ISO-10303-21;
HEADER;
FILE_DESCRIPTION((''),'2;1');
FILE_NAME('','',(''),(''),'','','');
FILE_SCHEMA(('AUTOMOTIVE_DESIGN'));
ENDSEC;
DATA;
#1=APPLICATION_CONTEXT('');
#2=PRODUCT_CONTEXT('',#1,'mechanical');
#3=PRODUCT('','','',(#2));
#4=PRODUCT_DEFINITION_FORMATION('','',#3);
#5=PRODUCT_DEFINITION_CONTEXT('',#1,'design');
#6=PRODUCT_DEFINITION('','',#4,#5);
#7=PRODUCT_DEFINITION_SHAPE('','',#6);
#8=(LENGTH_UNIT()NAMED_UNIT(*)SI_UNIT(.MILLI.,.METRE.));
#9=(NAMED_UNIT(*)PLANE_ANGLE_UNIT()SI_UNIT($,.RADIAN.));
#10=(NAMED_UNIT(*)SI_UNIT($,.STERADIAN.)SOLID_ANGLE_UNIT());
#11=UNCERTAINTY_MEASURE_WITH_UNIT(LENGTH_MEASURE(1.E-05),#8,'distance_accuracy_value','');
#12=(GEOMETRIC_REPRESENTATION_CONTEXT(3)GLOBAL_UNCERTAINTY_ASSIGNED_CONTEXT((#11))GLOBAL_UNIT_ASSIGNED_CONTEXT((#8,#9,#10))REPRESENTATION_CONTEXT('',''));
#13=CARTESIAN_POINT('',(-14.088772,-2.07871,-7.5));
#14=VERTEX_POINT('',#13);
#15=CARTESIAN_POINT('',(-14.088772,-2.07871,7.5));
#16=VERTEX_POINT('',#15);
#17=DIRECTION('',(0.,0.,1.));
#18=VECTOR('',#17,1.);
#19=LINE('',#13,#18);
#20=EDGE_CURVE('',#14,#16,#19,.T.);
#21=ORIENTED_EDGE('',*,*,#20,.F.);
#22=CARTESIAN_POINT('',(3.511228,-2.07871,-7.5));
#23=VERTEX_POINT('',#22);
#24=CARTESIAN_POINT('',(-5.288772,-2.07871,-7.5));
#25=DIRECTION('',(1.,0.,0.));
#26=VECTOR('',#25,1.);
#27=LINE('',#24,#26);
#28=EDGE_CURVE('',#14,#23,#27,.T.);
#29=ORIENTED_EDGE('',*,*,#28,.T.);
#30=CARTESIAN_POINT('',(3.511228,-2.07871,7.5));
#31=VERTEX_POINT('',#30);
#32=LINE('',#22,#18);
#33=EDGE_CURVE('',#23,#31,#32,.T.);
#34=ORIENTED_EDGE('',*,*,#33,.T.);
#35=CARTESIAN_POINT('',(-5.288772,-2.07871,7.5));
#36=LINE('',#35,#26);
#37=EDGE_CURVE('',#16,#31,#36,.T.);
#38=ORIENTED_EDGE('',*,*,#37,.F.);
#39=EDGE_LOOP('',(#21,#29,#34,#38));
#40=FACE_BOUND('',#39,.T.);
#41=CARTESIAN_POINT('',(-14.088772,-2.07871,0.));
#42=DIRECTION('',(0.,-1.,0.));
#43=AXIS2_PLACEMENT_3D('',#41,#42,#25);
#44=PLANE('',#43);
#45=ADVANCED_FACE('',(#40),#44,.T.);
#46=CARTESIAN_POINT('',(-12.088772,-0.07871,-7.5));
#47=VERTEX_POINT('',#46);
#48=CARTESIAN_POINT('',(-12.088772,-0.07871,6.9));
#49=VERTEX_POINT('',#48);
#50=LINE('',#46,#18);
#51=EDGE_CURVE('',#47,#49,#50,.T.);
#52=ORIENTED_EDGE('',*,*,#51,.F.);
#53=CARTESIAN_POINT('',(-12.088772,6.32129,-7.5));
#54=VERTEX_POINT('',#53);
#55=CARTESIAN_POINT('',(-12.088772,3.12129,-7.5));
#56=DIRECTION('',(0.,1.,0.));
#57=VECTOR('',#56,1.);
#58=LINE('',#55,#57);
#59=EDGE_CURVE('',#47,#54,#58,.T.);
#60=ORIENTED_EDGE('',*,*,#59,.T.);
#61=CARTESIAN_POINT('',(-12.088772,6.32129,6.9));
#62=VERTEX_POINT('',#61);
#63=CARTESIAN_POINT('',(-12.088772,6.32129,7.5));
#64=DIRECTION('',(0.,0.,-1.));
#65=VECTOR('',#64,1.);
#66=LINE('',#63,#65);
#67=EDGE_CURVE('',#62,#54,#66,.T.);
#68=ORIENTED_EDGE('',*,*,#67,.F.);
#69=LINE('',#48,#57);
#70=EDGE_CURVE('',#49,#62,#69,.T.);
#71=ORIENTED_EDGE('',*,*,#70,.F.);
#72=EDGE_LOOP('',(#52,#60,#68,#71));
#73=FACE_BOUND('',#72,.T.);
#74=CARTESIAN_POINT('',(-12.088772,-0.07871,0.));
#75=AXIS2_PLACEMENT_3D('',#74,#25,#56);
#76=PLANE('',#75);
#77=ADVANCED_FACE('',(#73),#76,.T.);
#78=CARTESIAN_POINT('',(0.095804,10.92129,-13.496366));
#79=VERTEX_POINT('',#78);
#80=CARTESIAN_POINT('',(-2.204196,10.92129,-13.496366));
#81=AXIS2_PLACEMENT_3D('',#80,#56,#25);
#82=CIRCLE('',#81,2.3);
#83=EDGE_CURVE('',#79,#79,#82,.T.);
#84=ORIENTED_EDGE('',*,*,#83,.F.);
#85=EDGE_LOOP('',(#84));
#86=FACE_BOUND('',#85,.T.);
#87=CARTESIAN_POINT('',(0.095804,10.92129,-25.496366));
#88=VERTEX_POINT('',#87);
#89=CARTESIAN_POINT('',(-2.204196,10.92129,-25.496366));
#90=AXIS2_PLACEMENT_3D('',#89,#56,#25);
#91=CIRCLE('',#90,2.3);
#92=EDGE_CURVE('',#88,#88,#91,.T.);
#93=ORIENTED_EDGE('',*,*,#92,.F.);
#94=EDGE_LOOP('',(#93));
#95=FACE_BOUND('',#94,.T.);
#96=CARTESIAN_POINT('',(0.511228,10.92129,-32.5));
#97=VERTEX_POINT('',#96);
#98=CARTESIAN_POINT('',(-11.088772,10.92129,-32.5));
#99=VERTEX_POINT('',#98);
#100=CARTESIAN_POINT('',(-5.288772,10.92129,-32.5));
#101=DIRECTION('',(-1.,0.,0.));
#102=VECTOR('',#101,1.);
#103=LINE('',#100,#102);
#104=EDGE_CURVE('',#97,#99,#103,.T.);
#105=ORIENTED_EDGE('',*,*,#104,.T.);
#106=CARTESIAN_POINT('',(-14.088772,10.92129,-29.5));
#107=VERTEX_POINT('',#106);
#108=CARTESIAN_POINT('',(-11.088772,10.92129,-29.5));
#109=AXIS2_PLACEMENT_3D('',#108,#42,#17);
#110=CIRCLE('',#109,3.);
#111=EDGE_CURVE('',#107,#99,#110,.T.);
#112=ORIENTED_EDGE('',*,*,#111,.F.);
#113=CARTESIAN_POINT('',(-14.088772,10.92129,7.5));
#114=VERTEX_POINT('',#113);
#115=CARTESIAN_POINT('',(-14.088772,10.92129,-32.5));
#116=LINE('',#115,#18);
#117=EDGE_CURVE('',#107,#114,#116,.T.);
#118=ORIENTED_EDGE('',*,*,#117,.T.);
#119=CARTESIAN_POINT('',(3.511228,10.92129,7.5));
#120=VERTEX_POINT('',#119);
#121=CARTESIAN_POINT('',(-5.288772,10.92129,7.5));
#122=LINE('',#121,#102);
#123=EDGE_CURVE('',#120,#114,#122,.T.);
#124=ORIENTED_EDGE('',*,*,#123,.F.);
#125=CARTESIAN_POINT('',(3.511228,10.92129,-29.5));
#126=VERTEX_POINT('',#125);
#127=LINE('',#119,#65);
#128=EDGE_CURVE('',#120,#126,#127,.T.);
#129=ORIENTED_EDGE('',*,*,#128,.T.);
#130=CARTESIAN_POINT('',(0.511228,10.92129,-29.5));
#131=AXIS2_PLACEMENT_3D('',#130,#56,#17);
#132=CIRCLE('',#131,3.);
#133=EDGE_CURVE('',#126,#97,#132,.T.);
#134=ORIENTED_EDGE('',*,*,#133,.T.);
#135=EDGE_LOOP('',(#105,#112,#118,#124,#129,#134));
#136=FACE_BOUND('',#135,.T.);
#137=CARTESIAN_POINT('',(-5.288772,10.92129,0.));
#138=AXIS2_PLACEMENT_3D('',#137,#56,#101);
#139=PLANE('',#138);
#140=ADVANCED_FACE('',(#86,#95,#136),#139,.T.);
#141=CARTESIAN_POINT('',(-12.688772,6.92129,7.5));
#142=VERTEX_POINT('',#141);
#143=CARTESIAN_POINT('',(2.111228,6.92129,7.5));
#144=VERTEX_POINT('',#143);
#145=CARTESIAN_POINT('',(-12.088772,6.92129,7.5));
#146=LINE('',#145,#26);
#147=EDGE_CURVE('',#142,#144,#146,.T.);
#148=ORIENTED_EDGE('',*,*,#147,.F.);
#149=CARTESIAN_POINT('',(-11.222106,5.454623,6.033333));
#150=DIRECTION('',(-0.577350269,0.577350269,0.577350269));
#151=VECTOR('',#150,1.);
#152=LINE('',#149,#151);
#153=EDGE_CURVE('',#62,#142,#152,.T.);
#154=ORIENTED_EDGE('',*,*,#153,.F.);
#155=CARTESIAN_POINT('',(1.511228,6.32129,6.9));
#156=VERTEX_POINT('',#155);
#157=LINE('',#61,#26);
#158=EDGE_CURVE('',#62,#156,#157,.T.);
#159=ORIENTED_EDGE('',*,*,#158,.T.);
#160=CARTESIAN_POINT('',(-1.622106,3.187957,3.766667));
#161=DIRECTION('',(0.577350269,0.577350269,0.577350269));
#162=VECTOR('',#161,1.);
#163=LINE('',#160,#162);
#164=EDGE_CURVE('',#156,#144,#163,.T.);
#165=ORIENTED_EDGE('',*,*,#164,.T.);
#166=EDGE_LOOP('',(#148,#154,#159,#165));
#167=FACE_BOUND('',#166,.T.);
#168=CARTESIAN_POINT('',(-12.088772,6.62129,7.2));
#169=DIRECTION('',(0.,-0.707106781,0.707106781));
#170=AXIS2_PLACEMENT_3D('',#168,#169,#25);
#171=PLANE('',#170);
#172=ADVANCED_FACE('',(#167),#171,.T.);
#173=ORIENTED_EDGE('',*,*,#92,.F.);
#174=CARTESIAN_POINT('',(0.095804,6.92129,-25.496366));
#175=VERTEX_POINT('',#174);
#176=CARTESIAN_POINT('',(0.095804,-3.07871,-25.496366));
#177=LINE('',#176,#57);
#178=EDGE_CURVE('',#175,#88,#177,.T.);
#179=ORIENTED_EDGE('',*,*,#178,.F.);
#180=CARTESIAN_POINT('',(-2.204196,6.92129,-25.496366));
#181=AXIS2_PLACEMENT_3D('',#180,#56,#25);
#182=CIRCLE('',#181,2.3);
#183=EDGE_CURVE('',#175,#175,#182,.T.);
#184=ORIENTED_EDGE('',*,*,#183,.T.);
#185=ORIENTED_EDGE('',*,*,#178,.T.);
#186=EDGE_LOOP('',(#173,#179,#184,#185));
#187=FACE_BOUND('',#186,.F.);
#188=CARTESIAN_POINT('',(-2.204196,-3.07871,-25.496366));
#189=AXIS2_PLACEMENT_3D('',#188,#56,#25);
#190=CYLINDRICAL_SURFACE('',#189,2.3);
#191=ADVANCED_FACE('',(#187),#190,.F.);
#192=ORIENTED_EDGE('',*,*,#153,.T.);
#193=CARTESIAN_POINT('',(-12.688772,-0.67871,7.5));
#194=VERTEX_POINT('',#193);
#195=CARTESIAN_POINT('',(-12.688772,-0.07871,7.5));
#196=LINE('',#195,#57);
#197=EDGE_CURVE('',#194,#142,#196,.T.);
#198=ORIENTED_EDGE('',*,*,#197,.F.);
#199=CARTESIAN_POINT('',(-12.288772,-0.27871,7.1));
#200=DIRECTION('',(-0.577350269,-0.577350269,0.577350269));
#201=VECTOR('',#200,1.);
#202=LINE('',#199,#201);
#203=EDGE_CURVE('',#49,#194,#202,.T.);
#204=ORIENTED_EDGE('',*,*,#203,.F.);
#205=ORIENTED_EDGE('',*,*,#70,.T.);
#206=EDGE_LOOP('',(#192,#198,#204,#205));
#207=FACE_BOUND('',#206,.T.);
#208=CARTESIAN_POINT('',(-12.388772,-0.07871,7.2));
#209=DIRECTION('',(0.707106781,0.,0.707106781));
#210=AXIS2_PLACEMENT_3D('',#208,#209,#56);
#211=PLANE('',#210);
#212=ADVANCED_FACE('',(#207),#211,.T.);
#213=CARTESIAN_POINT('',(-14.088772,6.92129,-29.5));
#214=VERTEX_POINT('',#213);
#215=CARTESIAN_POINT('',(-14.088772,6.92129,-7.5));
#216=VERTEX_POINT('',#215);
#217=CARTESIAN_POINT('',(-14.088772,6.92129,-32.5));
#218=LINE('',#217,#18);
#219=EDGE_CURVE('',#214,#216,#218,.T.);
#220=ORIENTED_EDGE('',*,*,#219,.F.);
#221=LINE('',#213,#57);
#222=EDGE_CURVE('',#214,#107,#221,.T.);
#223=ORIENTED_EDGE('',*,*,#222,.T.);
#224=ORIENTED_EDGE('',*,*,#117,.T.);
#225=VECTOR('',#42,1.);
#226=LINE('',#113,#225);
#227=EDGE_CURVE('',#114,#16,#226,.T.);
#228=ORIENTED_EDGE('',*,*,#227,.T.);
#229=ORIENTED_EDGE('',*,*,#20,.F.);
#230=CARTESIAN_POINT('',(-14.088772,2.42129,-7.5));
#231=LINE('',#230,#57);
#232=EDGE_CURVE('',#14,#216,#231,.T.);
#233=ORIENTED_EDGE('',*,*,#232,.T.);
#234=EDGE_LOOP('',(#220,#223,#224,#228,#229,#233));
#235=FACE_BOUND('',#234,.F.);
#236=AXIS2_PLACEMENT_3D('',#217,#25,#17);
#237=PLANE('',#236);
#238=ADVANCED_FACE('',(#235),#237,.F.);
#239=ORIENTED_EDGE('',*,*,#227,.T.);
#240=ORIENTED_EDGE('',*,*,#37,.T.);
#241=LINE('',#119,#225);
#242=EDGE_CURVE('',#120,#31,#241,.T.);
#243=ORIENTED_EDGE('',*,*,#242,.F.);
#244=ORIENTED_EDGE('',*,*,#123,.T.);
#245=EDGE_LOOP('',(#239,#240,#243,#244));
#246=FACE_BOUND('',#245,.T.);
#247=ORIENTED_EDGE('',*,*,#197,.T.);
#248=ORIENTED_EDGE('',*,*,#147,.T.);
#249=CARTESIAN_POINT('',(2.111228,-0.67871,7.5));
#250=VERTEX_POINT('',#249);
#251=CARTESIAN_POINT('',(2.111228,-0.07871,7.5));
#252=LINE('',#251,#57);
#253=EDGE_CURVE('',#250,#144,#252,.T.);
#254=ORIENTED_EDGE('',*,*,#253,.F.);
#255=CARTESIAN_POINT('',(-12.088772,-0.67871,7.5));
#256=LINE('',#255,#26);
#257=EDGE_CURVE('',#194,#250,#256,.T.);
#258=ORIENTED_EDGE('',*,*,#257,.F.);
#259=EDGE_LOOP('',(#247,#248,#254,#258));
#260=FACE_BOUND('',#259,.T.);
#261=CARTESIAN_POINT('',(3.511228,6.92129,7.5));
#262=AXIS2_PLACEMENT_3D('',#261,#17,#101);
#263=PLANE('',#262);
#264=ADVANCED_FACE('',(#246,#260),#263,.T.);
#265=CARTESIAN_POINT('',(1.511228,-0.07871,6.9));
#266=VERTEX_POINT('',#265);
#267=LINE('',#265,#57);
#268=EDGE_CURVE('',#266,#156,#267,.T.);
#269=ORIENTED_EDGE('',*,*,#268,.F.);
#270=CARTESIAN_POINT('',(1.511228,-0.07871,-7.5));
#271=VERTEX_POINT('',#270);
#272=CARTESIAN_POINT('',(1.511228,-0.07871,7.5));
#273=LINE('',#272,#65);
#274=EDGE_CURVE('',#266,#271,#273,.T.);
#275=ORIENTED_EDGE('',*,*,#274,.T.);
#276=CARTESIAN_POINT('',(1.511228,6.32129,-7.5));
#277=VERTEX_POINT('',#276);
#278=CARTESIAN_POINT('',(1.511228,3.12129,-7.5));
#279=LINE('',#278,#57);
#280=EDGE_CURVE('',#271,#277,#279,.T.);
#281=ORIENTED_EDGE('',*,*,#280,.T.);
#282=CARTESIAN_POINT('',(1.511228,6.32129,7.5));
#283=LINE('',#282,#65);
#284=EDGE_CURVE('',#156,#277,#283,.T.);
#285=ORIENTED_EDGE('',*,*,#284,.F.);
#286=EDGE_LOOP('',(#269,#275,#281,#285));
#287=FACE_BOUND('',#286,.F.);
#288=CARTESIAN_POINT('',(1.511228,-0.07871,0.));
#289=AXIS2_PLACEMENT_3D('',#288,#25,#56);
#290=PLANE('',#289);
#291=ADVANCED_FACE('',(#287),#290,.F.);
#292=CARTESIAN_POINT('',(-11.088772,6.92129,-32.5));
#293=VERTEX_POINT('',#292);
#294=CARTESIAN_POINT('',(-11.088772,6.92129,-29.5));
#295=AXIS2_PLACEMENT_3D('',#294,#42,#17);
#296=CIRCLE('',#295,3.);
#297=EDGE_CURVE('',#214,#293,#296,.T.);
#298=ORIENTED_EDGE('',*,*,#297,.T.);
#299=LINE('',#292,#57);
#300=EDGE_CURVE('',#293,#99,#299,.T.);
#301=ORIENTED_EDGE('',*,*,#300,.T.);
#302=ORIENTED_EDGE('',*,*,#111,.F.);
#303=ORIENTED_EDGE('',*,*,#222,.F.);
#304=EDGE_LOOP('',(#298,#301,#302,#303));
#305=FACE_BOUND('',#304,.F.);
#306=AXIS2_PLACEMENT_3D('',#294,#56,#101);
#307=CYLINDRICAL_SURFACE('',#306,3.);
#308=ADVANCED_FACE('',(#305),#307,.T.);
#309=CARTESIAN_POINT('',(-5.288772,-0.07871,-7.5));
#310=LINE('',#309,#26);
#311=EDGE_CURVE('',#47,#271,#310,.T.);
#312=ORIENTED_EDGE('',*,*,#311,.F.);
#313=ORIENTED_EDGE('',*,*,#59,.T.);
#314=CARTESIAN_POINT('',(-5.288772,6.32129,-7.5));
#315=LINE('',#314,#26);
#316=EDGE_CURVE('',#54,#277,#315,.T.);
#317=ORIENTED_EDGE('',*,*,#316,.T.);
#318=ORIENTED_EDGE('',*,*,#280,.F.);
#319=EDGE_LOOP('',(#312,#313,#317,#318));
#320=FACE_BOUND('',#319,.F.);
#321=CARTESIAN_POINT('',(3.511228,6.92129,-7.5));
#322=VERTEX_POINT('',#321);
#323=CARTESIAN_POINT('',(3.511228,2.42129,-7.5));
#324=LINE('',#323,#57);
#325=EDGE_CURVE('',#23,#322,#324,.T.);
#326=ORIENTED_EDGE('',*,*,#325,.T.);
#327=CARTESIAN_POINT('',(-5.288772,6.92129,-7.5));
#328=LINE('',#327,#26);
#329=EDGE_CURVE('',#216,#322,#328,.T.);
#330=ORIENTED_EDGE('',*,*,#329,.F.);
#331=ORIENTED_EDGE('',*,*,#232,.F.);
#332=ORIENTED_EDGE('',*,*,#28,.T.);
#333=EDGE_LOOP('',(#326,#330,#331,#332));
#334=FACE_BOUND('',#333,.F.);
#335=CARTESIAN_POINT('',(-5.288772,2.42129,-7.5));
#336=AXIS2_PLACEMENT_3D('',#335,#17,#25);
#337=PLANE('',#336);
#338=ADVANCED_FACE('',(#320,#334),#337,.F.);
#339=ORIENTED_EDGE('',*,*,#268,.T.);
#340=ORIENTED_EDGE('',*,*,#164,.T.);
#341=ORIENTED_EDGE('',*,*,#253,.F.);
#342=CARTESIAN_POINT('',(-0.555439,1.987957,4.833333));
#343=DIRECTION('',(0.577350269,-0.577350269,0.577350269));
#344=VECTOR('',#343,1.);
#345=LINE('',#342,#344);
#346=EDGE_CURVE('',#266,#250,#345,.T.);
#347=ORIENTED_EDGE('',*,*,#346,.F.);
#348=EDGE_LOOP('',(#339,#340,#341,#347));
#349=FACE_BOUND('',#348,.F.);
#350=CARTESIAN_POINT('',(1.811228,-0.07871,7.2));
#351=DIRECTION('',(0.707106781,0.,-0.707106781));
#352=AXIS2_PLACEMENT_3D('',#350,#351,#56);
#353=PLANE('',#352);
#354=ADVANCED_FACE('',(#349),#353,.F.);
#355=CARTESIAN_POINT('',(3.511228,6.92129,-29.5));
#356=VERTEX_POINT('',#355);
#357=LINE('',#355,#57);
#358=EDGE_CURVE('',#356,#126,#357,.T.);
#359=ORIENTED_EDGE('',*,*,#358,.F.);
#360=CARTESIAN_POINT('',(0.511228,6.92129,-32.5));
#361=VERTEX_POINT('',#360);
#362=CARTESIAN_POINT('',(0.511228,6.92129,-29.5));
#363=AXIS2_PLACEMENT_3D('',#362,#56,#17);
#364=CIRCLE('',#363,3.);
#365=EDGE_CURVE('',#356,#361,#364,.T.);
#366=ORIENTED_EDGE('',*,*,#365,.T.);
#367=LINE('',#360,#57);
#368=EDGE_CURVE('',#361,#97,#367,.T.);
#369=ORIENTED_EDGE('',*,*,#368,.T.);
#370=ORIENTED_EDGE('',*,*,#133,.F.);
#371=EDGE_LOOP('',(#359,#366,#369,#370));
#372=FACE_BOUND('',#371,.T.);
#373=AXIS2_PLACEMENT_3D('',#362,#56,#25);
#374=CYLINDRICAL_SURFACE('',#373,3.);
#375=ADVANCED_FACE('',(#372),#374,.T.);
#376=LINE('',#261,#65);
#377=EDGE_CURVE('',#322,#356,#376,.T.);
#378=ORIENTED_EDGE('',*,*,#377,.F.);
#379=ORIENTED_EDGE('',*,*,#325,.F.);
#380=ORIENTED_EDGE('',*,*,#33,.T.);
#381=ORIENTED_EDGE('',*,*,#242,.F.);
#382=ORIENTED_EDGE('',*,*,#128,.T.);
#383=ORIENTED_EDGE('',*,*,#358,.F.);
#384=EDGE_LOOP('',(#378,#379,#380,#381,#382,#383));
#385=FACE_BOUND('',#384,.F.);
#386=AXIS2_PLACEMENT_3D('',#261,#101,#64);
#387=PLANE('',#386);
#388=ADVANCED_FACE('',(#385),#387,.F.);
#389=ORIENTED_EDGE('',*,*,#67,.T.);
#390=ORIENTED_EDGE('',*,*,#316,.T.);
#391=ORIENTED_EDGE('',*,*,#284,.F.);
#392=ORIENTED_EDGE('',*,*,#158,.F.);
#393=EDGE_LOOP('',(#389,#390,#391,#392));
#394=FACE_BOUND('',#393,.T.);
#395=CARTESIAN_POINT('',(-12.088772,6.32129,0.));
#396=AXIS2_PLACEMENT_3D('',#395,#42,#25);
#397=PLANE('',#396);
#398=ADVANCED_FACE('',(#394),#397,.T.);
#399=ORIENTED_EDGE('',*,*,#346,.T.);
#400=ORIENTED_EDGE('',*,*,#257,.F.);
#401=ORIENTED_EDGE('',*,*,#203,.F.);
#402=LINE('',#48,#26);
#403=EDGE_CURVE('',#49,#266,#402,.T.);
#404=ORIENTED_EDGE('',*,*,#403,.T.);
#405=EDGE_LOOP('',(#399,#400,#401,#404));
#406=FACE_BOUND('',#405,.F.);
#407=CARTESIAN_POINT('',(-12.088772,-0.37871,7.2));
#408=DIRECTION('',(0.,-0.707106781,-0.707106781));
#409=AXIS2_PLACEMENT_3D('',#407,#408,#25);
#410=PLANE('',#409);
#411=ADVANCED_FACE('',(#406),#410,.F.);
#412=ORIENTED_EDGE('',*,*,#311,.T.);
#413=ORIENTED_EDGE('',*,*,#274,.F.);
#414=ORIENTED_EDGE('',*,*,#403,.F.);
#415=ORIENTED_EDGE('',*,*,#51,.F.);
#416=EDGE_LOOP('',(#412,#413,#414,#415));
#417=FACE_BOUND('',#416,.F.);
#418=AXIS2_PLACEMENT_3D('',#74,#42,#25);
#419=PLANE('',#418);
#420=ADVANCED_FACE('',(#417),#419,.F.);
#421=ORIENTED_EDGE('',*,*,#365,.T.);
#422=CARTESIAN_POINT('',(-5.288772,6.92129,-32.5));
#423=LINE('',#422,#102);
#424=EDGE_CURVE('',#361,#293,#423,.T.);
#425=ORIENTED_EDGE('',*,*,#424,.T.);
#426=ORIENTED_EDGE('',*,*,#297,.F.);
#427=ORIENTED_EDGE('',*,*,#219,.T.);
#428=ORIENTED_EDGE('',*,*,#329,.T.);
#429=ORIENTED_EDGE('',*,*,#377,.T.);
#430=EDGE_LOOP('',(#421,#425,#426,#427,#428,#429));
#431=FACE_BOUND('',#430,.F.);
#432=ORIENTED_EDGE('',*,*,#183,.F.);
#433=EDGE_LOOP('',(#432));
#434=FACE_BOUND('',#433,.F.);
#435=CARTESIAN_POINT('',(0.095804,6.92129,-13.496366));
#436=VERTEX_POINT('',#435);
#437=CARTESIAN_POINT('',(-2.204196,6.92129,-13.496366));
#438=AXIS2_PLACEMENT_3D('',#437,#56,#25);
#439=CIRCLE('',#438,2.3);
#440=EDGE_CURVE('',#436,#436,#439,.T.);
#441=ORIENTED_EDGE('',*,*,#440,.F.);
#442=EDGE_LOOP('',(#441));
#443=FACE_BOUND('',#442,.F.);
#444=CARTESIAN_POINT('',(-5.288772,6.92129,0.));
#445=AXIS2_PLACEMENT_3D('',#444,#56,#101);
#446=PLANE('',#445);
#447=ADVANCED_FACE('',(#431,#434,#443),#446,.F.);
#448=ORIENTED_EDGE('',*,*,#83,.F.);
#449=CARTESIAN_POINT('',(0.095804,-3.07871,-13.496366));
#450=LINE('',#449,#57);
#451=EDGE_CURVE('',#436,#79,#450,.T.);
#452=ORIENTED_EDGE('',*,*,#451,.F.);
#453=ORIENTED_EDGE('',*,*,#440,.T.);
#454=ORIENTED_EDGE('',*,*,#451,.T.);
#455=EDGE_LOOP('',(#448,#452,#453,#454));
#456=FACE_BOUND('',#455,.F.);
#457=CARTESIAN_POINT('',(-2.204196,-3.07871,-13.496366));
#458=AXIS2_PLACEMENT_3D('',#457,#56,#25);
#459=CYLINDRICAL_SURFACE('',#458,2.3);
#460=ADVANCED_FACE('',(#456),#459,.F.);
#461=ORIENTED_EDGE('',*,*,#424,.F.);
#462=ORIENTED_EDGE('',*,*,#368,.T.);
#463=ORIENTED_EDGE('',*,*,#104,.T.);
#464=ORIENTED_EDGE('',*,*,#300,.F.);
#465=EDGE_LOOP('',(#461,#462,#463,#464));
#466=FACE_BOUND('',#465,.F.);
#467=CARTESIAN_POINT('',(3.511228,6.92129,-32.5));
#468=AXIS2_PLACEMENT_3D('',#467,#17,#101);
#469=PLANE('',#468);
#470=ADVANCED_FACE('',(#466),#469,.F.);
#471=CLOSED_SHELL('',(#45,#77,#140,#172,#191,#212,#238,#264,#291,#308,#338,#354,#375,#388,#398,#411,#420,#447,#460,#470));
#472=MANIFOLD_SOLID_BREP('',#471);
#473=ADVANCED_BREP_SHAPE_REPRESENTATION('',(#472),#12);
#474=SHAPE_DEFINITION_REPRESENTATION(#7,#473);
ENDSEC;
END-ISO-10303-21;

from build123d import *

# Parameters (mm, degrees)
F0_W     = 17.6
F0_H     = 9
F0_W_2   = 13.6
F0_H_2   = 6.4
F1_DEPTH = 7.5
F2_W     = 17.6
F2_H     = 15
F2_H_2   = 25
F3_DEPTH = 4
F4_SIZE  = 0.6
F5_D     = 4.6
F5_DEPTH = 10
F5_TIP   = 1.3819794238
F6_R     = 3


# Not quite as in the source:
# - a feature names something its author has since deleted; it is built from what else it names


with BuildPart() as f1:
    # F0 (on Top) → F1 (new body, symmetric)
    with BuildSketch(Plane.XY):
        with Locations((-5.2887722373, 2.4212898893)):
            Rectangle(F0_W, F0_H)
        with Locations((-5.2887722373, 3.1212898893)):
            Rectangle(F0_W_2, F0_H_2, mode=Mode.SUBTRACT)
    extrude(amount=F1_DEPTH, both=True)

    # F2 (on face) → F3 (join)
    with BuildSketch(Plane(origin=(0, 6.9212898893, 0), x_dir=(-1, 0, 0), z_dir=(0, 1, 0))):
        with Locations((5.2887722373, 0)):
            Rectangle(F2_W, F2_H)
        with Locations((5.2887722373, -20)):
            Rectangle(F2_W, F2_H_2)
    extrude(amount=F3_DEPTH)

    # F4
    f4_edges = [f1.edges().sort_by_distance(p)[0] for p in [
        (-5.288772, 6.32129, 7.5),
        (1.511228, 3.12129, 7.5),
        (-12.088772, 3.12129, 7.5),
        (-5.288772, -0.07871, 7.5),
    ]]
    chamfer(f4_edges, length=F4_SIZE)

    # F5
    with Locations(Plane(origin=(0, 6.9212898893, 0), x_dir=(-1, 0, 0), z_dir=(0, -1, 0))):
        with Locations((2.2041960619, 25.4963655025), (2.2041960619, 13.4963655025)):
            Hole(F5_D / 2, depth=F5_DEPTH)
            with Locations((0, 0, -(F5_DEPTH + F5_TIP / 2))):  # 118° drill point
                Cone(0, F5_D / 2, F5_TIP, mode=Mode.SUBTRACT)

    # F6
    f6_edges = [f1.edges().sort_by_distance(p)[0] for p in [
        (3.511228, 8.92129, -32.5),
        (-14.088772, 8.92129, -32.5),
    ]]
    fillet(f6_edges, radius=F6_R)


solid = f1.part
